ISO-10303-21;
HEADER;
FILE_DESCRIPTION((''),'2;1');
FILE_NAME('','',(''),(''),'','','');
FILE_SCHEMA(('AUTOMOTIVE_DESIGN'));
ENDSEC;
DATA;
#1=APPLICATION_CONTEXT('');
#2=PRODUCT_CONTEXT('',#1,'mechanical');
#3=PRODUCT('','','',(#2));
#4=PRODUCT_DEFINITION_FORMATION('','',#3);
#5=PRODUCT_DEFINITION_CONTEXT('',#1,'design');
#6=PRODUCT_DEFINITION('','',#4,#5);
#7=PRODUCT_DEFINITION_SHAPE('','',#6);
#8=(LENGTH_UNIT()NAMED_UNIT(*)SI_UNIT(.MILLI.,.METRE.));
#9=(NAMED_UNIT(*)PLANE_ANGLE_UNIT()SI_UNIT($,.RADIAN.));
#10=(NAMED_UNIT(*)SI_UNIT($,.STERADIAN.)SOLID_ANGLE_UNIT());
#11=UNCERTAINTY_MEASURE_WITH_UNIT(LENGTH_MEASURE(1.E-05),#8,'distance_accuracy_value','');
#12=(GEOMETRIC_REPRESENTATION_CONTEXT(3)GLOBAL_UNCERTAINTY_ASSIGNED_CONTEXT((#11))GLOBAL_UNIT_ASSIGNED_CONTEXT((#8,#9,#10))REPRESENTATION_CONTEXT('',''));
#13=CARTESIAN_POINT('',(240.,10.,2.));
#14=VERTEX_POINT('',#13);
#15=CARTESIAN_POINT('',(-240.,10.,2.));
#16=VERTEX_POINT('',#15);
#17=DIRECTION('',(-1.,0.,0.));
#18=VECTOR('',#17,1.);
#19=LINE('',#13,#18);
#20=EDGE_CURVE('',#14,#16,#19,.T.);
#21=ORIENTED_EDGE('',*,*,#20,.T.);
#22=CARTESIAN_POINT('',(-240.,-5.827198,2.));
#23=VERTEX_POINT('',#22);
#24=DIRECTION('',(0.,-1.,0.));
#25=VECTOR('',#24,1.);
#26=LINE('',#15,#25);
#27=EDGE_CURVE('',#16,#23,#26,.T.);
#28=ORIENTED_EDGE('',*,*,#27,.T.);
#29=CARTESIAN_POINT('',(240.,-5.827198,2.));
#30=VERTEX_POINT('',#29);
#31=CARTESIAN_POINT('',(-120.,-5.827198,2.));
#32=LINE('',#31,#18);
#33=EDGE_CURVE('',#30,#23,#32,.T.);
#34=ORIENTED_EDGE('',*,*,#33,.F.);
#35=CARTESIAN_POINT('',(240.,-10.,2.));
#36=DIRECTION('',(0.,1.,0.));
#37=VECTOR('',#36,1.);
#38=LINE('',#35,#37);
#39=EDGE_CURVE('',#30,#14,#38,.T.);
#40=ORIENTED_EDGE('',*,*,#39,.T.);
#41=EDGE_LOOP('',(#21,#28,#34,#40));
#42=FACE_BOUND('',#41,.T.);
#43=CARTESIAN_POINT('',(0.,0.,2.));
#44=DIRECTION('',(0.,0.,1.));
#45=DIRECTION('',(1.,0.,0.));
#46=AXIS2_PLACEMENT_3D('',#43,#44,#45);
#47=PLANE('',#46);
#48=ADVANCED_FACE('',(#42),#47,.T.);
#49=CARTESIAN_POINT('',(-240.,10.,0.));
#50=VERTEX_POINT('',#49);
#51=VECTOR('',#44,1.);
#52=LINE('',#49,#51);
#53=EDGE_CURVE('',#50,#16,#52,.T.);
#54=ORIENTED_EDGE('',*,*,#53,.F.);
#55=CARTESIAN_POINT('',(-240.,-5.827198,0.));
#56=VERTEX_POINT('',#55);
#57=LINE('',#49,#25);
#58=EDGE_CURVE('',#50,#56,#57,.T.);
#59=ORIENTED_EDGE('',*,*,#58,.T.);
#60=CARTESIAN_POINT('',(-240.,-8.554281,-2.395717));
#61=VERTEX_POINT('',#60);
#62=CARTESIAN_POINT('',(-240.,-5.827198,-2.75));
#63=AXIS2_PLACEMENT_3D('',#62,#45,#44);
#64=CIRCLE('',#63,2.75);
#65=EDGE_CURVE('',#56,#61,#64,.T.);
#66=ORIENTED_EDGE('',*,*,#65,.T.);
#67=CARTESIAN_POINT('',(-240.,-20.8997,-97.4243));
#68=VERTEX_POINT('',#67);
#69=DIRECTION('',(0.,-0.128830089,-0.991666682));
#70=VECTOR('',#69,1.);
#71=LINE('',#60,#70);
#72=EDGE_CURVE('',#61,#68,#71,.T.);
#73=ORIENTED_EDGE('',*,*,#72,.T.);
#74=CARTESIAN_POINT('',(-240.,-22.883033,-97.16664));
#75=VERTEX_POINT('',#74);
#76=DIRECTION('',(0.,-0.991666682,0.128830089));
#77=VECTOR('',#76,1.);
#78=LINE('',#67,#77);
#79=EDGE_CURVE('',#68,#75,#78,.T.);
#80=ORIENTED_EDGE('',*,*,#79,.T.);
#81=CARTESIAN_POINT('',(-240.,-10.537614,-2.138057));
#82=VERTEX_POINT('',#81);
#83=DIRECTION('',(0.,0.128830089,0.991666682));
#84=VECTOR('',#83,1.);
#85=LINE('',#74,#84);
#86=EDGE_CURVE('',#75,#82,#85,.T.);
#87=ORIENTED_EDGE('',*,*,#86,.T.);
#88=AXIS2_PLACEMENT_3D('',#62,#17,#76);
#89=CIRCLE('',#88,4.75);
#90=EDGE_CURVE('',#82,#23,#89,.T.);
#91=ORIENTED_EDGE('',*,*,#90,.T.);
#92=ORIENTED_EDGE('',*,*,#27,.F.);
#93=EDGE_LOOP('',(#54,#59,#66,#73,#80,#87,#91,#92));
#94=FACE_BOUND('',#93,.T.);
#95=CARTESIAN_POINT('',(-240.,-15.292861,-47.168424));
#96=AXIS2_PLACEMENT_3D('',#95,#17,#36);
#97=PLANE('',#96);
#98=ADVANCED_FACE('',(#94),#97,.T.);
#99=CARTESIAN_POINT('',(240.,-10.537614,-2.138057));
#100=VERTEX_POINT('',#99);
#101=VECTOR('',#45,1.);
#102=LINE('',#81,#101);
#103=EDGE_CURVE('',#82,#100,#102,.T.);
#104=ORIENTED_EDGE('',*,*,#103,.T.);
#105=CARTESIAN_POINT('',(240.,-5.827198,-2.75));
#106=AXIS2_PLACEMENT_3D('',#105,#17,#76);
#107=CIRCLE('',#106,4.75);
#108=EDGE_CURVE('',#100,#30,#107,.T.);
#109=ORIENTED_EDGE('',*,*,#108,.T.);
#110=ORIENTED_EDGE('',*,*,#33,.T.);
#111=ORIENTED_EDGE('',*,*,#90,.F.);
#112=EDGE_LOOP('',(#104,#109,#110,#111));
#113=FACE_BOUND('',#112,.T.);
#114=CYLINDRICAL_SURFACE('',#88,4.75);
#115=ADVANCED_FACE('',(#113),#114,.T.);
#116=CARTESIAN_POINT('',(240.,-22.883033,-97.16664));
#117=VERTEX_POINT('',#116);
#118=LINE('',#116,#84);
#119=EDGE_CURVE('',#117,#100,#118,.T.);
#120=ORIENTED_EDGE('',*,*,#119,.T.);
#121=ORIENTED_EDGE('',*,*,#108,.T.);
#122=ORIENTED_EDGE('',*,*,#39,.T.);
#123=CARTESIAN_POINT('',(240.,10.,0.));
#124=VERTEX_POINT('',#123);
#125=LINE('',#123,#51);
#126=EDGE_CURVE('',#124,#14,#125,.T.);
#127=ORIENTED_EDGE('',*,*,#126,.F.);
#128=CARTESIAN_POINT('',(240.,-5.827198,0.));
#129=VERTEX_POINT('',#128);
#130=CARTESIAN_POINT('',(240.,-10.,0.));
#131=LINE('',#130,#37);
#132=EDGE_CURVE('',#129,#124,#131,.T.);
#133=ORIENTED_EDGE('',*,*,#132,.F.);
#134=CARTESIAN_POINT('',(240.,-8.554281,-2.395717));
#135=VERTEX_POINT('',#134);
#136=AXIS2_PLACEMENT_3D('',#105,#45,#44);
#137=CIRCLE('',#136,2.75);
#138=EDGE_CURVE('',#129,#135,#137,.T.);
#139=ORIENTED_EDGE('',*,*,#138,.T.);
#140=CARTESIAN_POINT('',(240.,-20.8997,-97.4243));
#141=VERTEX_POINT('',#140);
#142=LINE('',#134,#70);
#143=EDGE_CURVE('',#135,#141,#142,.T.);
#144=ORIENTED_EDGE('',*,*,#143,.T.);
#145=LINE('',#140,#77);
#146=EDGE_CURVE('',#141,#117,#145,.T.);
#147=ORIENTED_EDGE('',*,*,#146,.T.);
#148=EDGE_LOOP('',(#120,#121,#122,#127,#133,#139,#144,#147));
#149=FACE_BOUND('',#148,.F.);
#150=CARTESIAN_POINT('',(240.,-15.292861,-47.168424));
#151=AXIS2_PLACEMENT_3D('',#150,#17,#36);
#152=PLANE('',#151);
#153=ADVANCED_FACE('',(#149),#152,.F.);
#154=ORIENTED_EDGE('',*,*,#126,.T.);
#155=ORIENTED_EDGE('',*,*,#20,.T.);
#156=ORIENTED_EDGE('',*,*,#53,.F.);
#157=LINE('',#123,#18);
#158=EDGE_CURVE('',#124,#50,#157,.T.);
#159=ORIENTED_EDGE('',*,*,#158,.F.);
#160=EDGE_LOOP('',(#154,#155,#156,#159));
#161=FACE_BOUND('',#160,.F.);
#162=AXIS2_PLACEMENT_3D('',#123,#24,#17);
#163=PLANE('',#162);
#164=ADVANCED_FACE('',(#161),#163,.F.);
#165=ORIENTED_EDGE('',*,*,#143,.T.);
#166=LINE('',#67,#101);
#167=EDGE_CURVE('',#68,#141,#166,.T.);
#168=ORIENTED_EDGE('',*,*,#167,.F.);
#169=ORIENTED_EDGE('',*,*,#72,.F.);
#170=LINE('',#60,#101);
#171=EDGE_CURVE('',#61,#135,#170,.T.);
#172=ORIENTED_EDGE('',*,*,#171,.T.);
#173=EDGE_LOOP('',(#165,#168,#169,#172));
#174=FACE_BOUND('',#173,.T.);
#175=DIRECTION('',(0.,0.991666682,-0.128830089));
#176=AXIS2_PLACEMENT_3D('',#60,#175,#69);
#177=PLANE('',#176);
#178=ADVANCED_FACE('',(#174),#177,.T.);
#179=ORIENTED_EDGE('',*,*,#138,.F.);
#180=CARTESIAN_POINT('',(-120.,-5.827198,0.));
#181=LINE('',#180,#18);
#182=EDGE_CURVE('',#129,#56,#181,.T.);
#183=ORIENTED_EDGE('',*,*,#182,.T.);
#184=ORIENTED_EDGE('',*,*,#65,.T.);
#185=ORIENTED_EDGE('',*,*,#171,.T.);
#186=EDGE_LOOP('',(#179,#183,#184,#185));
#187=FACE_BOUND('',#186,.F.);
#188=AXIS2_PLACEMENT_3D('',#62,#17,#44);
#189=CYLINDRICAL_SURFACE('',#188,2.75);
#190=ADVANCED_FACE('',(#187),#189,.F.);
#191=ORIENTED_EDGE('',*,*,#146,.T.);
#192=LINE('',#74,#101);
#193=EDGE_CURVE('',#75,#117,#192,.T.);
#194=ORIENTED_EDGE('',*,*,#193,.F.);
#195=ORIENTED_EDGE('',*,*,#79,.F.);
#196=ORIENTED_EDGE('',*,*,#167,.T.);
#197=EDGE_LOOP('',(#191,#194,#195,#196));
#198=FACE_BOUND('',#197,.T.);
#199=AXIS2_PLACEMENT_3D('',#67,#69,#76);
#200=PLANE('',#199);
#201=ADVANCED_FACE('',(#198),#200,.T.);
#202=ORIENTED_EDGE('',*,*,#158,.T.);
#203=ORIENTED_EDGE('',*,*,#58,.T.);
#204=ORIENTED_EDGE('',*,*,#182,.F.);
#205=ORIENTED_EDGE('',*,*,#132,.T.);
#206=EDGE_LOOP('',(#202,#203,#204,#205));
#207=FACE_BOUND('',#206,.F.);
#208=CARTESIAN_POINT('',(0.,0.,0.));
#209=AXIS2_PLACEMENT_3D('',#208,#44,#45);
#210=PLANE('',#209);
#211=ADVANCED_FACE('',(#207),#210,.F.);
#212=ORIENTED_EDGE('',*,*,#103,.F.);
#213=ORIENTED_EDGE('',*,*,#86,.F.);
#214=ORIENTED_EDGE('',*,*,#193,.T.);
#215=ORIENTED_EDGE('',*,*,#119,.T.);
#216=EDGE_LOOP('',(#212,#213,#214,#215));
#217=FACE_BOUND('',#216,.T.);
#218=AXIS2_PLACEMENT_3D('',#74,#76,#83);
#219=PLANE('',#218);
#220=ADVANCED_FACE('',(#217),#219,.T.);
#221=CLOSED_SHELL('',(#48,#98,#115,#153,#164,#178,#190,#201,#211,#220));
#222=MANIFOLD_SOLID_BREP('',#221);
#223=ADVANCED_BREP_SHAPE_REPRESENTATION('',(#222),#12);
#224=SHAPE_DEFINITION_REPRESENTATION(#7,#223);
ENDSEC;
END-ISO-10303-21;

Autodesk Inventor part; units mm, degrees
ref_plane "YZ Plane" through (0, 0, 0) normal (1, 0, 0) x (0, 1, 0)
ref_plane "XZ Plane" through (0, 0, 0) normal (0, 1, 0) x (-1, 0, 0)
ref_plane "XY Plane" through (0, 0, 0) normal (0, 0, 1) x (1, 0, 0)
sketch "Sketch7" plane through (0, 0, 0) normal (0, 0, 1) x (1, 0, 0)
  line L0 (240, 10) -> (-240, 10)
  line L1 (-240, 10) -> (-240, -10)
  line L2 (-240, -10) -> (240, -10)
  line L3 (240, -10) -> (240, 10)
  line L4 (240, 10) -> (-240, -10) construction
  line L5 (-240, 10) -> (240, -10) construction
  point P0 (0, 0)
  dimension "d52" = 480
  dimension "d53" = 20
extrude "Plate6" add sketch "Sketch7" along normal blind 2
sketch "Sketch8" plane through (-240, -8.0167, 1.7423) normal (0, -0.9916667, 0.1288302) x (1, 0, 0)
  line L0 (480, 0) -> (0, 0)
  line L1 (0, 0) -> (0, -100)
  line L2 (0, -100) -> (480, -100)
  line L3 (480, -100) -> (480, 0)
edge flange "Flange5" height 100 angle 82.598 thickness 2 bend radius 2.75 thickness toward (0, -0.9916667, 0.1288302) relief round relief width 2 relief depth 1 edges at (0, -10, 0) wall of the first edge with corners at (240, -8.0167, 1.7423) (-240, -8.0167, 1.7423) (-240, -20.8997, -97.4243) (240, -20.8997, -97.4243)
bend "Bend5"
corner "Corner5"
equation "\"d54\" = Thickness"
equation "\"d55\" = BendReliefWidth"
equation "\"d56\" = BendReliefDepth"
equation "\"d57\" = MinimumRemnant"
equation "\"d58\" = TransitionRadius"
equation "\"d61\" = BendRadius"
equation "\"d62\" = CornerReliefSize"
equation "\"d63\" = GapSize"
equation "\"d64\" = JacobiRadiusSize"
equation "\"BendReliefWidth\" = Thickness"
equation "\"BendReliefDepth\" = 0.5 * Thickness"
equation "\"CornerReliefSize\" = 4 * Thickness"
equation "\"MinimumRemnant\" = 2 * Thickness"
equation "\"TransitionRadius\" = BendRadius"
equation "\"JacobiRadiusSize\" = BendRadius"
equation "\"GapSize\" = Thickness"
equation "\"Thickness\" = 2"
equation "\"BendRadius\" = 2.75"
properties part number "TRM 017 sheet in" material "AISI 304"
